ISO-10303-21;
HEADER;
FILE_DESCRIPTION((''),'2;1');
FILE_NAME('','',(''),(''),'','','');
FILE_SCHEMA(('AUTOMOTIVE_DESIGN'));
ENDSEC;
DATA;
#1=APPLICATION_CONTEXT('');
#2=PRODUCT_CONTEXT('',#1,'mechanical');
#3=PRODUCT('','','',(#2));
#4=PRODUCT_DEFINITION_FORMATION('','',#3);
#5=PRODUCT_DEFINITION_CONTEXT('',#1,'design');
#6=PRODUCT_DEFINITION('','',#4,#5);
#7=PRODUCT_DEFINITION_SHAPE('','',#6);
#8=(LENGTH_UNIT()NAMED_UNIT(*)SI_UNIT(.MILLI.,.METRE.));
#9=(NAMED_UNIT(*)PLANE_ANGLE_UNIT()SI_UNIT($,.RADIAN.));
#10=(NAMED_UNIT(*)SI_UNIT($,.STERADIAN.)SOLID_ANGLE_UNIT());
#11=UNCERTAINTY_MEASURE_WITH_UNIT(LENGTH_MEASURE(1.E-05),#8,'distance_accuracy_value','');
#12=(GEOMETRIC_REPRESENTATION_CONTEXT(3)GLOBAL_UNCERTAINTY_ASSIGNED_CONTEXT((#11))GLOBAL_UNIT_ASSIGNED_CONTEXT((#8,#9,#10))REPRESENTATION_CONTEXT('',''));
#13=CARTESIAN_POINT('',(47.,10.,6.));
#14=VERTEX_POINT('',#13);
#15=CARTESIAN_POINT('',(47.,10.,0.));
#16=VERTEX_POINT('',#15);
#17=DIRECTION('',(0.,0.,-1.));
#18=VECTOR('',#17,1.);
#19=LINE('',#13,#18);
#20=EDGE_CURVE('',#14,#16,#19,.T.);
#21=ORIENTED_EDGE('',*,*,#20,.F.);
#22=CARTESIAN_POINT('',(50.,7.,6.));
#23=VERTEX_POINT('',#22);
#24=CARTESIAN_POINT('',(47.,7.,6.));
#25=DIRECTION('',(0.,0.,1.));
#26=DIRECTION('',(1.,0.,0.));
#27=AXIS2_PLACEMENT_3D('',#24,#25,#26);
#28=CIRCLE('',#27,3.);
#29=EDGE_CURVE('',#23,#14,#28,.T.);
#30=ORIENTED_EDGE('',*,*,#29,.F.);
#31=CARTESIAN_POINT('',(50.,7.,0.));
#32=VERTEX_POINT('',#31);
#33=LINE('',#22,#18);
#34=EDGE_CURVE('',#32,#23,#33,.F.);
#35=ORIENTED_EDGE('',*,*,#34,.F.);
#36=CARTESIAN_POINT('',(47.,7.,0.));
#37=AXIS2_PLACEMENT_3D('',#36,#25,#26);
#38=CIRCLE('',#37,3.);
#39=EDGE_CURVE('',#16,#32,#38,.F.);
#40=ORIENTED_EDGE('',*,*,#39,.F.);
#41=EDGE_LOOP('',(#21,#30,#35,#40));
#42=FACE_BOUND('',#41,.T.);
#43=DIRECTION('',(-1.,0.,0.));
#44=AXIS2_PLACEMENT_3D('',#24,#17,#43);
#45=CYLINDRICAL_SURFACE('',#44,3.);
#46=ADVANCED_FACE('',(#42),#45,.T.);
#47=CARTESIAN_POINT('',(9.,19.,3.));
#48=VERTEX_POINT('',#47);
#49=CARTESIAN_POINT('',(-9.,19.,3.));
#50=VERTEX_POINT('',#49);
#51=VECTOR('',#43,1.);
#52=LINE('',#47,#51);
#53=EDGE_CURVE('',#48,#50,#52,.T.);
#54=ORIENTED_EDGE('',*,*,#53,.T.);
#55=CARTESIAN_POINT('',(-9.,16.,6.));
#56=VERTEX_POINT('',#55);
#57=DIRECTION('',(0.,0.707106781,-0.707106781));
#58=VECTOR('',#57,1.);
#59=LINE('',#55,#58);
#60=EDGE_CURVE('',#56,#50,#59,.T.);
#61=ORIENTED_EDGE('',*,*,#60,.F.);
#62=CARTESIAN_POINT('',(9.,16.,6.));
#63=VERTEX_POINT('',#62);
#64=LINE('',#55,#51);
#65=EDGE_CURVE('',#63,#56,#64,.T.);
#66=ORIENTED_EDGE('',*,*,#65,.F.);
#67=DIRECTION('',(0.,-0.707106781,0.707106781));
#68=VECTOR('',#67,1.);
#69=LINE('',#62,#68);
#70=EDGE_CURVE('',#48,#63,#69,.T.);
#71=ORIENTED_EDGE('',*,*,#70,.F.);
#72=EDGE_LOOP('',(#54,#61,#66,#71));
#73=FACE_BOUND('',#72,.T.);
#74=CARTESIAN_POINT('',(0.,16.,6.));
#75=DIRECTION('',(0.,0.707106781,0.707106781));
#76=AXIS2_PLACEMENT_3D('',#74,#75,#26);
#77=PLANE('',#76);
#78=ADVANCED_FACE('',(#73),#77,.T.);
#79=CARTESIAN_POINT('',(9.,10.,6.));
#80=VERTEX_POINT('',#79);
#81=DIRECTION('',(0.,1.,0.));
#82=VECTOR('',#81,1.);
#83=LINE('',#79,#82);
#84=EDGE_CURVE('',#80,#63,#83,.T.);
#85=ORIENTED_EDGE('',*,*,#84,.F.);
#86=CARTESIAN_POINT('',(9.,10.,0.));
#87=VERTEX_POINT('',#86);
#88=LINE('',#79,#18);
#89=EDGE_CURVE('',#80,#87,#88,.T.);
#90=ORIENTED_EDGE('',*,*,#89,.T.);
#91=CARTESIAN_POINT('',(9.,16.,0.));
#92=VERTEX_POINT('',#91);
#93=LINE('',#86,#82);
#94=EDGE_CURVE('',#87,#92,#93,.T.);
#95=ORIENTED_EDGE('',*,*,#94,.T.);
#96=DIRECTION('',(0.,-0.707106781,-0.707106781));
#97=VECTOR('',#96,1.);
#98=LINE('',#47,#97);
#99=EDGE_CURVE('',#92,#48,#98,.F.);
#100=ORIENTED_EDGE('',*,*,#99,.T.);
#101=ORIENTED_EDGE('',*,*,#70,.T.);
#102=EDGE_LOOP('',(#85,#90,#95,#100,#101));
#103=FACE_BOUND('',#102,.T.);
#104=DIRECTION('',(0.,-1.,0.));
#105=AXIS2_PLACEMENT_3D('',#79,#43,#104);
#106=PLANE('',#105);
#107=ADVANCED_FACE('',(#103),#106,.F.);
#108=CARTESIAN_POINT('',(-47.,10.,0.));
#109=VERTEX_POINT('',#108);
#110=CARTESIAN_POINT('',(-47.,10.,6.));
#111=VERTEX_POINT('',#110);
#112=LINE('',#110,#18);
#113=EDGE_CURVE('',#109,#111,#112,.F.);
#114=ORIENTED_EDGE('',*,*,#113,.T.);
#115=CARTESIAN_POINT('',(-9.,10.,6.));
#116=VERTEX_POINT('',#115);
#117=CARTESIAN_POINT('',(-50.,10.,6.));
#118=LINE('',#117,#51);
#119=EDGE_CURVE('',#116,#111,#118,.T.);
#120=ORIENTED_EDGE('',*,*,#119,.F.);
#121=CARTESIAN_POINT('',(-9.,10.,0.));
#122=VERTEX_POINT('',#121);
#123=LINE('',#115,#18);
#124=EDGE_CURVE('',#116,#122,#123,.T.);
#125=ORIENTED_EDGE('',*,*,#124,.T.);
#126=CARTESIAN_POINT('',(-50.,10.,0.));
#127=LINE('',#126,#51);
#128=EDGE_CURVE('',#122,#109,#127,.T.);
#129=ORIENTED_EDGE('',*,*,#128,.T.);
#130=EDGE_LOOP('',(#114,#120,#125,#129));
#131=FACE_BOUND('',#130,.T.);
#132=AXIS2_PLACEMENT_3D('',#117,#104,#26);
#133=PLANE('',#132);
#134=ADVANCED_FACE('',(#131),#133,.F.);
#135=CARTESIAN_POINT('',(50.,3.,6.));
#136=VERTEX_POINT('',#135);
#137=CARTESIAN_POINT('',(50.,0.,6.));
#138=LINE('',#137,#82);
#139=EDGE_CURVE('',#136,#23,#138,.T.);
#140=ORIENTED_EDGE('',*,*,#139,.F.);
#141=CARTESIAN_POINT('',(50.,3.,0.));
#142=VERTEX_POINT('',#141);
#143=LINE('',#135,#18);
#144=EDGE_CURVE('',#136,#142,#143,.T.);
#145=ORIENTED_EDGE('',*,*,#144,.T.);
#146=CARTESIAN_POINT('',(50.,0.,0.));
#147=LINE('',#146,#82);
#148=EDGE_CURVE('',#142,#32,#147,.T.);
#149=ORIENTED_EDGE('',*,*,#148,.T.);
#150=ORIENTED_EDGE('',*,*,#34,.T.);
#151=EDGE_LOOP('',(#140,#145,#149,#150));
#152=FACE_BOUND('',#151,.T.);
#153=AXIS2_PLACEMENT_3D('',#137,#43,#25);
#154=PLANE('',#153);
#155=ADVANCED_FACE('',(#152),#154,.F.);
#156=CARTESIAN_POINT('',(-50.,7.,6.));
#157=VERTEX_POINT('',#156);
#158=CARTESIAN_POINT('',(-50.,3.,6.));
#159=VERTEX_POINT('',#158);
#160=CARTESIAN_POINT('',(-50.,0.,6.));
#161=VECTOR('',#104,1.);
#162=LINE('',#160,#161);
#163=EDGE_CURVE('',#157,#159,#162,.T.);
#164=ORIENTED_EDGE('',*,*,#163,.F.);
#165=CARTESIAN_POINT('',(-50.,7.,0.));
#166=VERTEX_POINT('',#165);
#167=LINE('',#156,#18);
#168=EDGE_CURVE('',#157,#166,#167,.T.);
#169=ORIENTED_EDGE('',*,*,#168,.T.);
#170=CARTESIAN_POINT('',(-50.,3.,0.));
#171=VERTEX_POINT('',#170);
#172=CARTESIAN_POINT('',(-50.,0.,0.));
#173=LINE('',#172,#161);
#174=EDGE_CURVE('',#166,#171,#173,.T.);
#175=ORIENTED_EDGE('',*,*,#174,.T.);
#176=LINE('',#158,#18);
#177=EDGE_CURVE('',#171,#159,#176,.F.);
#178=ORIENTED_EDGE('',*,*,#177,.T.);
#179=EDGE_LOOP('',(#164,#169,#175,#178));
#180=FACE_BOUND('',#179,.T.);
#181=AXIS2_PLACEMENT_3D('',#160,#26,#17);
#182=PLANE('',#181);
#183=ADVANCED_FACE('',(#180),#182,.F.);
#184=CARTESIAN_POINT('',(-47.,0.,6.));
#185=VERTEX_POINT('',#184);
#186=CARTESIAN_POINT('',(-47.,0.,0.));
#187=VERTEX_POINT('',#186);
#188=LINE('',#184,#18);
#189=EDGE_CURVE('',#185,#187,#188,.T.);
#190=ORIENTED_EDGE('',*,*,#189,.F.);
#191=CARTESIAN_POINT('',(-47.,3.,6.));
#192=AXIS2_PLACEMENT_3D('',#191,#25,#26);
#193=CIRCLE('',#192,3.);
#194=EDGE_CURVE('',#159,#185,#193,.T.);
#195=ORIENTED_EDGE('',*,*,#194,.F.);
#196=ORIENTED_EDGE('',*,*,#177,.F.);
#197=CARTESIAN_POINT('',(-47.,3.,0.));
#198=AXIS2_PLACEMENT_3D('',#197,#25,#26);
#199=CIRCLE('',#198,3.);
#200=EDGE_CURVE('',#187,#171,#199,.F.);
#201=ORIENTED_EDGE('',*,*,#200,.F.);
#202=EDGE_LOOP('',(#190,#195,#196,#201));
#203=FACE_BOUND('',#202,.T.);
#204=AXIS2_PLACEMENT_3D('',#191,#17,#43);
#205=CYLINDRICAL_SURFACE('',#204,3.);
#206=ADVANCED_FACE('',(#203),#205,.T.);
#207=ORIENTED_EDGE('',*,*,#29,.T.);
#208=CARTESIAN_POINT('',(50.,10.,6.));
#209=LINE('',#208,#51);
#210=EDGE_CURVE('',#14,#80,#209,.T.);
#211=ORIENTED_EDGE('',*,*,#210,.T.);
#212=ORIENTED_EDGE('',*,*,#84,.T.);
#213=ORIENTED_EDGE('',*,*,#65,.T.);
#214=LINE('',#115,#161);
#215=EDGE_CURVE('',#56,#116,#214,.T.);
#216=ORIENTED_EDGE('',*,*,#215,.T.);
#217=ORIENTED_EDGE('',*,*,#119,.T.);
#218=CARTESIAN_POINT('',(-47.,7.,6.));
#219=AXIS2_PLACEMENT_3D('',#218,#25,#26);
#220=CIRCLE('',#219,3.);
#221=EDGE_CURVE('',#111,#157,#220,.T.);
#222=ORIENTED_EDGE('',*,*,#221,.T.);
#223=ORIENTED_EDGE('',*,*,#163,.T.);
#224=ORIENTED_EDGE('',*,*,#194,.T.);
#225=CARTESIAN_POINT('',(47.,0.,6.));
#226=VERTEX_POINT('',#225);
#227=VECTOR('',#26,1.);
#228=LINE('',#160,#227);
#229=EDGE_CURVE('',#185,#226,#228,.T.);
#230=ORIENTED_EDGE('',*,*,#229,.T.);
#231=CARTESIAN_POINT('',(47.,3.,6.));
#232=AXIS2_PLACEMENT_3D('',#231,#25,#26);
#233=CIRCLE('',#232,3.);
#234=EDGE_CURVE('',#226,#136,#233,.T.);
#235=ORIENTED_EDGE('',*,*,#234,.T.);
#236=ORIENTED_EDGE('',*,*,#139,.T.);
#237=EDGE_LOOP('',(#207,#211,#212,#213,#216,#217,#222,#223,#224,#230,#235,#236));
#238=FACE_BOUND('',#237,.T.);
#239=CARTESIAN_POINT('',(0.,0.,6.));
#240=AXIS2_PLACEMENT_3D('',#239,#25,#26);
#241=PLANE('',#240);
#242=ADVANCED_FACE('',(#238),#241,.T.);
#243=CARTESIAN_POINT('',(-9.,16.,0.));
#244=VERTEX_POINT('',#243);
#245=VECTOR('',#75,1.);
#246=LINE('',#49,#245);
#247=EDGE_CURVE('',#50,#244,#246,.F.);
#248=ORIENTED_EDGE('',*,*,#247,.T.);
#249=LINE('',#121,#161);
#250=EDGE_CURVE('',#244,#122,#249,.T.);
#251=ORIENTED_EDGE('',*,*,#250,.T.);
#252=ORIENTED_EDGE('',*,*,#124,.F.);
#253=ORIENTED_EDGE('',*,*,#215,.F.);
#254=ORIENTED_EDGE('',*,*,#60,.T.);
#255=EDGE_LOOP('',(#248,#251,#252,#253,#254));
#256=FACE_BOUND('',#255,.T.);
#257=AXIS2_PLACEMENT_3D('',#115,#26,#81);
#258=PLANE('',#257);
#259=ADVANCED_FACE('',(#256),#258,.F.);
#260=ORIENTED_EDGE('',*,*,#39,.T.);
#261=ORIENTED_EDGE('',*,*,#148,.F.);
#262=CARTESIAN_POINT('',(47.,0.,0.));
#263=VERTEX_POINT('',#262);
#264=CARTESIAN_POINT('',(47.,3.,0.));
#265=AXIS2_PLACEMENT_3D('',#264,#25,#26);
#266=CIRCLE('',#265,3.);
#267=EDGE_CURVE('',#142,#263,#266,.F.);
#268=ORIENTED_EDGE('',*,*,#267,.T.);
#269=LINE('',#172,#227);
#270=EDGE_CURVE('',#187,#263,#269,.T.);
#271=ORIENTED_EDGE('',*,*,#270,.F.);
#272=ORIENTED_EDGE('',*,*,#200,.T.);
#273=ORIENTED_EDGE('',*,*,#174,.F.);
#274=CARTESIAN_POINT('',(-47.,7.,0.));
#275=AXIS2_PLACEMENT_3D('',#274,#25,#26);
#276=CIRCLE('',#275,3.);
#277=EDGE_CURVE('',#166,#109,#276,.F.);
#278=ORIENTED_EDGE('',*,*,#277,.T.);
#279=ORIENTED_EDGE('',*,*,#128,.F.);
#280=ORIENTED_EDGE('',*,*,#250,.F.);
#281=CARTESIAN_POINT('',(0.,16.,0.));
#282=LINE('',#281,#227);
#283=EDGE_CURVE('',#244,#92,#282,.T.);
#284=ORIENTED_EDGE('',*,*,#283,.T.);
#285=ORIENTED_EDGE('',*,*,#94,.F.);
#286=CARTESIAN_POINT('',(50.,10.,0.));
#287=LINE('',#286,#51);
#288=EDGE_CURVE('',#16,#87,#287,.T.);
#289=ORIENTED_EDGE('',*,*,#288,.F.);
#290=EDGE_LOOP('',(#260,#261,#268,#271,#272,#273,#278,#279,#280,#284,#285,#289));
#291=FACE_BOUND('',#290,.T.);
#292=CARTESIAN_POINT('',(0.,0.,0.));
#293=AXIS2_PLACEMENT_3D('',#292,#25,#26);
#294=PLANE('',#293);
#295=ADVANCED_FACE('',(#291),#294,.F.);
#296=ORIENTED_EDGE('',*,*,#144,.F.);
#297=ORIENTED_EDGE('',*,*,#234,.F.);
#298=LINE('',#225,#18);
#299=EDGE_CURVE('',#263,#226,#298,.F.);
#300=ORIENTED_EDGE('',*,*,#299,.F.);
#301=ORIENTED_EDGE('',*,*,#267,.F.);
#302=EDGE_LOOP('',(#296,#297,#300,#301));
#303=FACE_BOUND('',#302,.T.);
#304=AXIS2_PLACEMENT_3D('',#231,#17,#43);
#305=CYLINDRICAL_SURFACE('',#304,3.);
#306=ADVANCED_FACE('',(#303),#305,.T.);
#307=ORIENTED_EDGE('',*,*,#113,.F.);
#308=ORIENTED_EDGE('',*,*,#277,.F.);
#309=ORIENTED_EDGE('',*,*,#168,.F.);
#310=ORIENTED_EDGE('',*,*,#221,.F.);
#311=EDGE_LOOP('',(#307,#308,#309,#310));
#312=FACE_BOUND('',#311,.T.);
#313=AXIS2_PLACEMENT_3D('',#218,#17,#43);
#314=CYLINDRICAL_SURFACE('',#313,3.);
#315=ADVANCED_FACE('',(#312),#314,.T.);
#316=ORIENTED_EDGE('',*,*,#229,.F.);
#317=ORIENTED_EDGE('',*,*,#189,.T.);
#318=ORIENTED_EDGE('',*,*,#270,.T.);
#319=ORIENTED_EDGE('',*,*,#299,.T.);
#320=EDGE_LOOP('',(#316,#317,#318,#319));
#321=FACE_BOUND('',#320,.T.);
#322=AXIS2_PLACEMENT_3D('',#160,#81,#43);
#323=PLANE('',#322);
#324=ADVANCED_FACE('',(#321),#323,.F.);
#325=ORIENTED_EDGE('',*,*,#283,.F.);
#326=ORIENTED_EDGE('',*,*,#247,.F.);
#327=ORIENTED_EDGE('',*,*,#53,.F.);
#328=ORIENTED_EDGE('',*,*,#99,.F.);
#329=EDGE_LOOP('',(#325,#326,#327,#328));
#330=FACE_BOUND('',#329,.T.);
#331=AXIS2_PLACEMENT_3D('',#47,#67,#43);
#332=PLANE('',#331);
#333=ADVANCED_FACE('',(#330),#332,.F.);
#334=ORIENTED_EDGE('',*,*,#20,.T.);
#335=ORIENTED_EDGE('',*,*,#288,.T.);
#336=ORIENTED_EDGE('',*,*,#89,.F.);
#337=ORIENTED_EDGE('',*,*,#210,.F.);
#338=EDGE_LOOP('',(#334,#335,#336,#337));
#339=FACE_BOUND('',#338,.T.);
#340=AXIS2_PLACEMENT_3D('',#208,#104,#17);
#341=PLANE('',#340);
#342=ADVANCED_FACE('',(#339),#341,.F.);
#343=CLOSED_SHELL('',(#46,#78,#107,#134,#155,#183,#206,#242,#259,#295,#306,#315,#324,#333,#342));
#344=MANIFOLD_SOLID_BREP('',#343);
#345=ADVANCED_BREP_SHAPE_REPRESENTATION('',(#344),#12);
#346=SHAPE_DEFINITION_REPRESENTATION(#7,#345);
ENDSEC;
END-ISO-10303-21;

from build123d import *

# Parameters (mm, degrees)
EXTRUDE_1_DEPTH = 6
FILLET_1_R      = 3
CHAMFER_1_SIZE  = 3


with BuildPart() as part:
    # 草图1 → 凸台-拉伸1 (new body)
    with BuildSketch(Plane.XY):
        Polygon((-50, 0), (50, 0), (50, 10), (9, 10), (9, 19), (-9, 19), (-9, 10), (-50, 10), align=None)
    extrude(amount=EXTRUDE_1_DEPTH)

    # 圆角1
    fillet_1_edges = [part.edges().sort_by_distance(p)[0] for p in [
        (50, 10, 3),
        (50, 0, 3),
        (-50, 0, 3),
        (-50, 10, 3),
    ]]
    fillet(fillet_1_edges, radius=FILLET_1_R)

    # 倒角1
    chamfer_1_edges = [part.edges().sort_by_distance(p)[0] for p in [
        (0, 19, 6),
        (0, 19, 0),
    ]]
    chamfer(chamfer_1_edges, length=CHAMFER_1_SIZE - 0.0001)  # a hair under: the kernel refuses the full size


solid = part.part
